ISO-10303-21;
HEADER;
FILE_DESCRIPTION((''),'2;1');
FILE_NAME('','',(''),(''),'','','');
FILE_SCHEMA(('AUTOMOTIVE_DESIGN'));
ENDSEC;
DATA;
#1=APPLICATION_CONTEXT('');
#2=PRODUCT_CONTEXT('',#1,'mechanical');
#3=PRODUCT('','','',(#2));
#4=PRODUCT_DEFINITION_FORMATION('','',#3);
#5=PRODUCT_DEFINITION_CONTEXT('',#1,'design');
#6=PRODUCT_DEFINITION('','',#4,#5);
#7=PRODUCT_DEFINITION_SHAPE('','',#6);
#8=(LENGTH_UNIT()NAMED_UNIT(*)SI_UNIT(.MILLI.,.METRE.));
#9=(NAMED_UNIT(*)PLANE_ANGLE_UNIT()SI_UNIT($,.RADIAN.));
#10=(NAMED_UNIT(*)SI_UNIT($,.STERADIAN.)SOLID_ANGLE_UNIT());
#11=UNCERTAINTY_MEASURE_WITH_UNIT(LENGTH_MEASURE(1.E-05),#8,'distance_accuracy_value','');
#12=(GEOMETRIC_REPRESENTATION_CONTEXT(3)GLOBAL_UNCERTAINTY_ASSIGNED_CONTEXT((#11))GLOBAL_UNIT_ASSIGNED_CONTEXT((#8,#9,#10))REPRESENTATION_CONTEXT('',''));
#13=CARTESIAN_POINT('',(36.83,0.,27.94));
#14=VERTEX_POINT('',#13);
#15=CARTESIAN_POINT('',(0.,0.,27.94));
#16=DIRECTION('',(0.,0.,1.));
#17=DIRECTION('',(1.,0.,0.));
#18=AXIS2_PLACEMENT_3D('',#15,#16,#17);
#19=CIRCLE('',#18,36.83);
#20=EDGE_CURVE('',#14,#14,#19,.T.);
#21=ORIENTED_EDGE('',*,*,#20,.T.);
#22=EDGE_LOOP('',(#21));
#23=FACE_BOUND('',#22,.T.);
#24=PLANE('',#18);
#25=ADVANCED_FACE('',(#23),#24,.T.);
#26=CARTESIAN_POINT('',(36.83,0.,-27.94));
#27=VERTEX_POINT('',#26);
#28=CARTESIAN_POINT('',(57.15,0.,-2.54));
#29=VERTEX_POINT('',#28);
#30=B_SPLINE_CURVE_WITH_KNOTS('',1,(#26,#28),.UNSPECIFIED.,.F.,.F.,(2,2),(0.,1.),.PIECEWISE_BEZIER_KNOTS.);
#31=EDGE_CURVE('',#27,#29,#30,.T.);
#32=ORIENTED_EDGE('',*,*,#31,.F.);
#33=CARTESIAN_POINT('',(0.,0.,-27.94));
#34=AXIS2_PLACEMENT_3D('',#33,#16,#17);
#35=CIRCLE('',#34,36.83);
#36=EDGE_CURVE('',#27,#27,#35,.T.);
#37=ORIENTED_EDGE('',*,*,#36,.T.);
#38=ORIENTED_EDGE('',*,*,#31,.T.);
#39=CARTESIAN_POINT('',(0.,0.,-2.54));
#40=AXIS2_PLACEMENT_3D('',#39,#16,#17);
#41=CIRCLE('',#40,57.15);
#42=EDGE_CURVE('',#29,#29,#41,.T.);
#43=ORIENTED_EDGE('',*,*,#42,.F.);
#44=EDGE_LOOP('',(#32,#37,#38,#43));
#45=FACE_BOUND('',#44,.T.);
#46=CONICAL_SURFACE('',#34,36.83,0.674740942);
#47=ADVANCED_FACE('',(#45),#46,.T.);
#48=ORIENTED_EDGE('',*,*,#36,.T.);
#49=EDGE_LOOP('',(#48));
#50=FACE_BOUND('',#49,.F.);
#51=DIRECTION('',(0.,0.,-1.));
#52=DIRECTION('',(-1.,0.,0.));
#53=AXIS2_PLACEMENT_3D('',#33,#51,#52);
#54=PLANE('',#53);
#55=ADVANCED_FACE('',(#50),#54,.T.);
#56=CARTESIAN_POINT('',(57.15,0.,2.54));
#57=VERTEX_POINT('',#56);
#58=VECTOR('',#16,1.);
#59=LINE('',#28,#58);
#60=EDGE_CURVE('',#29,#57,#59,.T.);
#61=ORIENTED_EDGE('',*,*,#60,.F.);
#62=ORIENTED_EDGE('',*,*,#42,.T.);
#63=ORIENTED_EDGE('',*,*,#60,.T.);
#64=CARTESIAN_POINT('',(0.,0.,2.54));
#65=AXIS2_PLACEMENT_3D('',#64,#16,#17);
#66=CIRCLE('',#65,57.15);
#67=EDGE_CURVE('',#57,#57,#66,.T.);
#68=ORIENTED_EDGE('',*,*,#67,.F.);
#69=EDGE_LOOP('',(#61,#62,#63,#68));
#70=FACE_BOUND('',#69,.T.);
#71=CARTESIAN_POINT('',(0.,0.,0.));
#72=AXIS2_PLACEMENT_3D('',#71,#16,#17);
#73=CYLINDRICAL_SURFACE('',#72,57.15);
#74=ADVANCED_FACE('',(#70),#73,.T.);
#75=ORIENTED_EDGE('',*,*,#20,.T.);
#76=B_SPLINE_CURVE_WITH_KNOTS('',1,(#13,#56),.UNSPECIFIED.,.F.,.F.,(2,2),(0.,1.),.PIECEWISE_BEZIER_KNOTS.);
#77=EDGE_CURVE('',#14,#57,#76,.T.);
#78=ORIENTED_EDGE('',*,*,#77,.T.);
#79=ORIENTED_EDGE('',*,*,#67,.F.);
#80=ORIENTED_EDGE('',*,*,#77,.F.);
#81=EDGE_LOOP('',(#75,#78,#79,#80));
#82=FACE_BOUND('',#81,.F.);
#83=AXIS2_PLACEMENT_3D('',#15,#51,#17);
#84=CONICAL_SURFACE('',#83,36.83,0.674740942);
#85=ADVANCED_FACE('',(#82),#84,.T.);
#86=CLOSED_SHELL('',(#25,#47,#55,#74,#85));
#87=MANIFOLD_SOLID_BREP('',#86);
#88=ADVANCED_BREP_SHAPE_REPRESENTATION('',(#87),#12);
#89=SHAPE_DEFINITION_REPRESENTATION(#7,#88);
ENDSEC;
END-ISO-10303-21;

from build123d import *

# Parameters (mm, degrees)
F0_R      = 57.15
F1_DEPTH  = 2.54
F3_R      = 36.83
F1_FACE_R = 57.15


# Not quite as in the source:
# - the program builds the solid bodies; features that only make, move or delete a surface that nothing else refers to are left out


with BuildPart() as f1:
    # F0 (on Top) → F1 (new body)
    with BuildSketch(Plane.XY):
        Circle(F0_R)
    extrude(amount=F1_DEPTH)

    # F3 (on offset) → F4 section 0
    with BuildSketch(Plane.XY.offset(27.94)):
        Circle(F3_R)
    # F1_face (on face) → F4 section 1
    with BuildSketch(Plane.XY.offset(2.54)):
        Circle(F1_FACE_R)
    loft()

    # F5: F1 across face


with BuildPart() as f1_1:
    add(f1.part)
    add(f1.part.mirror(Plane(origin=(0, 0, 0), x_dir=(1, 0, 0), z_dir=(0, 0, -1))))


solid = f1_1.part
